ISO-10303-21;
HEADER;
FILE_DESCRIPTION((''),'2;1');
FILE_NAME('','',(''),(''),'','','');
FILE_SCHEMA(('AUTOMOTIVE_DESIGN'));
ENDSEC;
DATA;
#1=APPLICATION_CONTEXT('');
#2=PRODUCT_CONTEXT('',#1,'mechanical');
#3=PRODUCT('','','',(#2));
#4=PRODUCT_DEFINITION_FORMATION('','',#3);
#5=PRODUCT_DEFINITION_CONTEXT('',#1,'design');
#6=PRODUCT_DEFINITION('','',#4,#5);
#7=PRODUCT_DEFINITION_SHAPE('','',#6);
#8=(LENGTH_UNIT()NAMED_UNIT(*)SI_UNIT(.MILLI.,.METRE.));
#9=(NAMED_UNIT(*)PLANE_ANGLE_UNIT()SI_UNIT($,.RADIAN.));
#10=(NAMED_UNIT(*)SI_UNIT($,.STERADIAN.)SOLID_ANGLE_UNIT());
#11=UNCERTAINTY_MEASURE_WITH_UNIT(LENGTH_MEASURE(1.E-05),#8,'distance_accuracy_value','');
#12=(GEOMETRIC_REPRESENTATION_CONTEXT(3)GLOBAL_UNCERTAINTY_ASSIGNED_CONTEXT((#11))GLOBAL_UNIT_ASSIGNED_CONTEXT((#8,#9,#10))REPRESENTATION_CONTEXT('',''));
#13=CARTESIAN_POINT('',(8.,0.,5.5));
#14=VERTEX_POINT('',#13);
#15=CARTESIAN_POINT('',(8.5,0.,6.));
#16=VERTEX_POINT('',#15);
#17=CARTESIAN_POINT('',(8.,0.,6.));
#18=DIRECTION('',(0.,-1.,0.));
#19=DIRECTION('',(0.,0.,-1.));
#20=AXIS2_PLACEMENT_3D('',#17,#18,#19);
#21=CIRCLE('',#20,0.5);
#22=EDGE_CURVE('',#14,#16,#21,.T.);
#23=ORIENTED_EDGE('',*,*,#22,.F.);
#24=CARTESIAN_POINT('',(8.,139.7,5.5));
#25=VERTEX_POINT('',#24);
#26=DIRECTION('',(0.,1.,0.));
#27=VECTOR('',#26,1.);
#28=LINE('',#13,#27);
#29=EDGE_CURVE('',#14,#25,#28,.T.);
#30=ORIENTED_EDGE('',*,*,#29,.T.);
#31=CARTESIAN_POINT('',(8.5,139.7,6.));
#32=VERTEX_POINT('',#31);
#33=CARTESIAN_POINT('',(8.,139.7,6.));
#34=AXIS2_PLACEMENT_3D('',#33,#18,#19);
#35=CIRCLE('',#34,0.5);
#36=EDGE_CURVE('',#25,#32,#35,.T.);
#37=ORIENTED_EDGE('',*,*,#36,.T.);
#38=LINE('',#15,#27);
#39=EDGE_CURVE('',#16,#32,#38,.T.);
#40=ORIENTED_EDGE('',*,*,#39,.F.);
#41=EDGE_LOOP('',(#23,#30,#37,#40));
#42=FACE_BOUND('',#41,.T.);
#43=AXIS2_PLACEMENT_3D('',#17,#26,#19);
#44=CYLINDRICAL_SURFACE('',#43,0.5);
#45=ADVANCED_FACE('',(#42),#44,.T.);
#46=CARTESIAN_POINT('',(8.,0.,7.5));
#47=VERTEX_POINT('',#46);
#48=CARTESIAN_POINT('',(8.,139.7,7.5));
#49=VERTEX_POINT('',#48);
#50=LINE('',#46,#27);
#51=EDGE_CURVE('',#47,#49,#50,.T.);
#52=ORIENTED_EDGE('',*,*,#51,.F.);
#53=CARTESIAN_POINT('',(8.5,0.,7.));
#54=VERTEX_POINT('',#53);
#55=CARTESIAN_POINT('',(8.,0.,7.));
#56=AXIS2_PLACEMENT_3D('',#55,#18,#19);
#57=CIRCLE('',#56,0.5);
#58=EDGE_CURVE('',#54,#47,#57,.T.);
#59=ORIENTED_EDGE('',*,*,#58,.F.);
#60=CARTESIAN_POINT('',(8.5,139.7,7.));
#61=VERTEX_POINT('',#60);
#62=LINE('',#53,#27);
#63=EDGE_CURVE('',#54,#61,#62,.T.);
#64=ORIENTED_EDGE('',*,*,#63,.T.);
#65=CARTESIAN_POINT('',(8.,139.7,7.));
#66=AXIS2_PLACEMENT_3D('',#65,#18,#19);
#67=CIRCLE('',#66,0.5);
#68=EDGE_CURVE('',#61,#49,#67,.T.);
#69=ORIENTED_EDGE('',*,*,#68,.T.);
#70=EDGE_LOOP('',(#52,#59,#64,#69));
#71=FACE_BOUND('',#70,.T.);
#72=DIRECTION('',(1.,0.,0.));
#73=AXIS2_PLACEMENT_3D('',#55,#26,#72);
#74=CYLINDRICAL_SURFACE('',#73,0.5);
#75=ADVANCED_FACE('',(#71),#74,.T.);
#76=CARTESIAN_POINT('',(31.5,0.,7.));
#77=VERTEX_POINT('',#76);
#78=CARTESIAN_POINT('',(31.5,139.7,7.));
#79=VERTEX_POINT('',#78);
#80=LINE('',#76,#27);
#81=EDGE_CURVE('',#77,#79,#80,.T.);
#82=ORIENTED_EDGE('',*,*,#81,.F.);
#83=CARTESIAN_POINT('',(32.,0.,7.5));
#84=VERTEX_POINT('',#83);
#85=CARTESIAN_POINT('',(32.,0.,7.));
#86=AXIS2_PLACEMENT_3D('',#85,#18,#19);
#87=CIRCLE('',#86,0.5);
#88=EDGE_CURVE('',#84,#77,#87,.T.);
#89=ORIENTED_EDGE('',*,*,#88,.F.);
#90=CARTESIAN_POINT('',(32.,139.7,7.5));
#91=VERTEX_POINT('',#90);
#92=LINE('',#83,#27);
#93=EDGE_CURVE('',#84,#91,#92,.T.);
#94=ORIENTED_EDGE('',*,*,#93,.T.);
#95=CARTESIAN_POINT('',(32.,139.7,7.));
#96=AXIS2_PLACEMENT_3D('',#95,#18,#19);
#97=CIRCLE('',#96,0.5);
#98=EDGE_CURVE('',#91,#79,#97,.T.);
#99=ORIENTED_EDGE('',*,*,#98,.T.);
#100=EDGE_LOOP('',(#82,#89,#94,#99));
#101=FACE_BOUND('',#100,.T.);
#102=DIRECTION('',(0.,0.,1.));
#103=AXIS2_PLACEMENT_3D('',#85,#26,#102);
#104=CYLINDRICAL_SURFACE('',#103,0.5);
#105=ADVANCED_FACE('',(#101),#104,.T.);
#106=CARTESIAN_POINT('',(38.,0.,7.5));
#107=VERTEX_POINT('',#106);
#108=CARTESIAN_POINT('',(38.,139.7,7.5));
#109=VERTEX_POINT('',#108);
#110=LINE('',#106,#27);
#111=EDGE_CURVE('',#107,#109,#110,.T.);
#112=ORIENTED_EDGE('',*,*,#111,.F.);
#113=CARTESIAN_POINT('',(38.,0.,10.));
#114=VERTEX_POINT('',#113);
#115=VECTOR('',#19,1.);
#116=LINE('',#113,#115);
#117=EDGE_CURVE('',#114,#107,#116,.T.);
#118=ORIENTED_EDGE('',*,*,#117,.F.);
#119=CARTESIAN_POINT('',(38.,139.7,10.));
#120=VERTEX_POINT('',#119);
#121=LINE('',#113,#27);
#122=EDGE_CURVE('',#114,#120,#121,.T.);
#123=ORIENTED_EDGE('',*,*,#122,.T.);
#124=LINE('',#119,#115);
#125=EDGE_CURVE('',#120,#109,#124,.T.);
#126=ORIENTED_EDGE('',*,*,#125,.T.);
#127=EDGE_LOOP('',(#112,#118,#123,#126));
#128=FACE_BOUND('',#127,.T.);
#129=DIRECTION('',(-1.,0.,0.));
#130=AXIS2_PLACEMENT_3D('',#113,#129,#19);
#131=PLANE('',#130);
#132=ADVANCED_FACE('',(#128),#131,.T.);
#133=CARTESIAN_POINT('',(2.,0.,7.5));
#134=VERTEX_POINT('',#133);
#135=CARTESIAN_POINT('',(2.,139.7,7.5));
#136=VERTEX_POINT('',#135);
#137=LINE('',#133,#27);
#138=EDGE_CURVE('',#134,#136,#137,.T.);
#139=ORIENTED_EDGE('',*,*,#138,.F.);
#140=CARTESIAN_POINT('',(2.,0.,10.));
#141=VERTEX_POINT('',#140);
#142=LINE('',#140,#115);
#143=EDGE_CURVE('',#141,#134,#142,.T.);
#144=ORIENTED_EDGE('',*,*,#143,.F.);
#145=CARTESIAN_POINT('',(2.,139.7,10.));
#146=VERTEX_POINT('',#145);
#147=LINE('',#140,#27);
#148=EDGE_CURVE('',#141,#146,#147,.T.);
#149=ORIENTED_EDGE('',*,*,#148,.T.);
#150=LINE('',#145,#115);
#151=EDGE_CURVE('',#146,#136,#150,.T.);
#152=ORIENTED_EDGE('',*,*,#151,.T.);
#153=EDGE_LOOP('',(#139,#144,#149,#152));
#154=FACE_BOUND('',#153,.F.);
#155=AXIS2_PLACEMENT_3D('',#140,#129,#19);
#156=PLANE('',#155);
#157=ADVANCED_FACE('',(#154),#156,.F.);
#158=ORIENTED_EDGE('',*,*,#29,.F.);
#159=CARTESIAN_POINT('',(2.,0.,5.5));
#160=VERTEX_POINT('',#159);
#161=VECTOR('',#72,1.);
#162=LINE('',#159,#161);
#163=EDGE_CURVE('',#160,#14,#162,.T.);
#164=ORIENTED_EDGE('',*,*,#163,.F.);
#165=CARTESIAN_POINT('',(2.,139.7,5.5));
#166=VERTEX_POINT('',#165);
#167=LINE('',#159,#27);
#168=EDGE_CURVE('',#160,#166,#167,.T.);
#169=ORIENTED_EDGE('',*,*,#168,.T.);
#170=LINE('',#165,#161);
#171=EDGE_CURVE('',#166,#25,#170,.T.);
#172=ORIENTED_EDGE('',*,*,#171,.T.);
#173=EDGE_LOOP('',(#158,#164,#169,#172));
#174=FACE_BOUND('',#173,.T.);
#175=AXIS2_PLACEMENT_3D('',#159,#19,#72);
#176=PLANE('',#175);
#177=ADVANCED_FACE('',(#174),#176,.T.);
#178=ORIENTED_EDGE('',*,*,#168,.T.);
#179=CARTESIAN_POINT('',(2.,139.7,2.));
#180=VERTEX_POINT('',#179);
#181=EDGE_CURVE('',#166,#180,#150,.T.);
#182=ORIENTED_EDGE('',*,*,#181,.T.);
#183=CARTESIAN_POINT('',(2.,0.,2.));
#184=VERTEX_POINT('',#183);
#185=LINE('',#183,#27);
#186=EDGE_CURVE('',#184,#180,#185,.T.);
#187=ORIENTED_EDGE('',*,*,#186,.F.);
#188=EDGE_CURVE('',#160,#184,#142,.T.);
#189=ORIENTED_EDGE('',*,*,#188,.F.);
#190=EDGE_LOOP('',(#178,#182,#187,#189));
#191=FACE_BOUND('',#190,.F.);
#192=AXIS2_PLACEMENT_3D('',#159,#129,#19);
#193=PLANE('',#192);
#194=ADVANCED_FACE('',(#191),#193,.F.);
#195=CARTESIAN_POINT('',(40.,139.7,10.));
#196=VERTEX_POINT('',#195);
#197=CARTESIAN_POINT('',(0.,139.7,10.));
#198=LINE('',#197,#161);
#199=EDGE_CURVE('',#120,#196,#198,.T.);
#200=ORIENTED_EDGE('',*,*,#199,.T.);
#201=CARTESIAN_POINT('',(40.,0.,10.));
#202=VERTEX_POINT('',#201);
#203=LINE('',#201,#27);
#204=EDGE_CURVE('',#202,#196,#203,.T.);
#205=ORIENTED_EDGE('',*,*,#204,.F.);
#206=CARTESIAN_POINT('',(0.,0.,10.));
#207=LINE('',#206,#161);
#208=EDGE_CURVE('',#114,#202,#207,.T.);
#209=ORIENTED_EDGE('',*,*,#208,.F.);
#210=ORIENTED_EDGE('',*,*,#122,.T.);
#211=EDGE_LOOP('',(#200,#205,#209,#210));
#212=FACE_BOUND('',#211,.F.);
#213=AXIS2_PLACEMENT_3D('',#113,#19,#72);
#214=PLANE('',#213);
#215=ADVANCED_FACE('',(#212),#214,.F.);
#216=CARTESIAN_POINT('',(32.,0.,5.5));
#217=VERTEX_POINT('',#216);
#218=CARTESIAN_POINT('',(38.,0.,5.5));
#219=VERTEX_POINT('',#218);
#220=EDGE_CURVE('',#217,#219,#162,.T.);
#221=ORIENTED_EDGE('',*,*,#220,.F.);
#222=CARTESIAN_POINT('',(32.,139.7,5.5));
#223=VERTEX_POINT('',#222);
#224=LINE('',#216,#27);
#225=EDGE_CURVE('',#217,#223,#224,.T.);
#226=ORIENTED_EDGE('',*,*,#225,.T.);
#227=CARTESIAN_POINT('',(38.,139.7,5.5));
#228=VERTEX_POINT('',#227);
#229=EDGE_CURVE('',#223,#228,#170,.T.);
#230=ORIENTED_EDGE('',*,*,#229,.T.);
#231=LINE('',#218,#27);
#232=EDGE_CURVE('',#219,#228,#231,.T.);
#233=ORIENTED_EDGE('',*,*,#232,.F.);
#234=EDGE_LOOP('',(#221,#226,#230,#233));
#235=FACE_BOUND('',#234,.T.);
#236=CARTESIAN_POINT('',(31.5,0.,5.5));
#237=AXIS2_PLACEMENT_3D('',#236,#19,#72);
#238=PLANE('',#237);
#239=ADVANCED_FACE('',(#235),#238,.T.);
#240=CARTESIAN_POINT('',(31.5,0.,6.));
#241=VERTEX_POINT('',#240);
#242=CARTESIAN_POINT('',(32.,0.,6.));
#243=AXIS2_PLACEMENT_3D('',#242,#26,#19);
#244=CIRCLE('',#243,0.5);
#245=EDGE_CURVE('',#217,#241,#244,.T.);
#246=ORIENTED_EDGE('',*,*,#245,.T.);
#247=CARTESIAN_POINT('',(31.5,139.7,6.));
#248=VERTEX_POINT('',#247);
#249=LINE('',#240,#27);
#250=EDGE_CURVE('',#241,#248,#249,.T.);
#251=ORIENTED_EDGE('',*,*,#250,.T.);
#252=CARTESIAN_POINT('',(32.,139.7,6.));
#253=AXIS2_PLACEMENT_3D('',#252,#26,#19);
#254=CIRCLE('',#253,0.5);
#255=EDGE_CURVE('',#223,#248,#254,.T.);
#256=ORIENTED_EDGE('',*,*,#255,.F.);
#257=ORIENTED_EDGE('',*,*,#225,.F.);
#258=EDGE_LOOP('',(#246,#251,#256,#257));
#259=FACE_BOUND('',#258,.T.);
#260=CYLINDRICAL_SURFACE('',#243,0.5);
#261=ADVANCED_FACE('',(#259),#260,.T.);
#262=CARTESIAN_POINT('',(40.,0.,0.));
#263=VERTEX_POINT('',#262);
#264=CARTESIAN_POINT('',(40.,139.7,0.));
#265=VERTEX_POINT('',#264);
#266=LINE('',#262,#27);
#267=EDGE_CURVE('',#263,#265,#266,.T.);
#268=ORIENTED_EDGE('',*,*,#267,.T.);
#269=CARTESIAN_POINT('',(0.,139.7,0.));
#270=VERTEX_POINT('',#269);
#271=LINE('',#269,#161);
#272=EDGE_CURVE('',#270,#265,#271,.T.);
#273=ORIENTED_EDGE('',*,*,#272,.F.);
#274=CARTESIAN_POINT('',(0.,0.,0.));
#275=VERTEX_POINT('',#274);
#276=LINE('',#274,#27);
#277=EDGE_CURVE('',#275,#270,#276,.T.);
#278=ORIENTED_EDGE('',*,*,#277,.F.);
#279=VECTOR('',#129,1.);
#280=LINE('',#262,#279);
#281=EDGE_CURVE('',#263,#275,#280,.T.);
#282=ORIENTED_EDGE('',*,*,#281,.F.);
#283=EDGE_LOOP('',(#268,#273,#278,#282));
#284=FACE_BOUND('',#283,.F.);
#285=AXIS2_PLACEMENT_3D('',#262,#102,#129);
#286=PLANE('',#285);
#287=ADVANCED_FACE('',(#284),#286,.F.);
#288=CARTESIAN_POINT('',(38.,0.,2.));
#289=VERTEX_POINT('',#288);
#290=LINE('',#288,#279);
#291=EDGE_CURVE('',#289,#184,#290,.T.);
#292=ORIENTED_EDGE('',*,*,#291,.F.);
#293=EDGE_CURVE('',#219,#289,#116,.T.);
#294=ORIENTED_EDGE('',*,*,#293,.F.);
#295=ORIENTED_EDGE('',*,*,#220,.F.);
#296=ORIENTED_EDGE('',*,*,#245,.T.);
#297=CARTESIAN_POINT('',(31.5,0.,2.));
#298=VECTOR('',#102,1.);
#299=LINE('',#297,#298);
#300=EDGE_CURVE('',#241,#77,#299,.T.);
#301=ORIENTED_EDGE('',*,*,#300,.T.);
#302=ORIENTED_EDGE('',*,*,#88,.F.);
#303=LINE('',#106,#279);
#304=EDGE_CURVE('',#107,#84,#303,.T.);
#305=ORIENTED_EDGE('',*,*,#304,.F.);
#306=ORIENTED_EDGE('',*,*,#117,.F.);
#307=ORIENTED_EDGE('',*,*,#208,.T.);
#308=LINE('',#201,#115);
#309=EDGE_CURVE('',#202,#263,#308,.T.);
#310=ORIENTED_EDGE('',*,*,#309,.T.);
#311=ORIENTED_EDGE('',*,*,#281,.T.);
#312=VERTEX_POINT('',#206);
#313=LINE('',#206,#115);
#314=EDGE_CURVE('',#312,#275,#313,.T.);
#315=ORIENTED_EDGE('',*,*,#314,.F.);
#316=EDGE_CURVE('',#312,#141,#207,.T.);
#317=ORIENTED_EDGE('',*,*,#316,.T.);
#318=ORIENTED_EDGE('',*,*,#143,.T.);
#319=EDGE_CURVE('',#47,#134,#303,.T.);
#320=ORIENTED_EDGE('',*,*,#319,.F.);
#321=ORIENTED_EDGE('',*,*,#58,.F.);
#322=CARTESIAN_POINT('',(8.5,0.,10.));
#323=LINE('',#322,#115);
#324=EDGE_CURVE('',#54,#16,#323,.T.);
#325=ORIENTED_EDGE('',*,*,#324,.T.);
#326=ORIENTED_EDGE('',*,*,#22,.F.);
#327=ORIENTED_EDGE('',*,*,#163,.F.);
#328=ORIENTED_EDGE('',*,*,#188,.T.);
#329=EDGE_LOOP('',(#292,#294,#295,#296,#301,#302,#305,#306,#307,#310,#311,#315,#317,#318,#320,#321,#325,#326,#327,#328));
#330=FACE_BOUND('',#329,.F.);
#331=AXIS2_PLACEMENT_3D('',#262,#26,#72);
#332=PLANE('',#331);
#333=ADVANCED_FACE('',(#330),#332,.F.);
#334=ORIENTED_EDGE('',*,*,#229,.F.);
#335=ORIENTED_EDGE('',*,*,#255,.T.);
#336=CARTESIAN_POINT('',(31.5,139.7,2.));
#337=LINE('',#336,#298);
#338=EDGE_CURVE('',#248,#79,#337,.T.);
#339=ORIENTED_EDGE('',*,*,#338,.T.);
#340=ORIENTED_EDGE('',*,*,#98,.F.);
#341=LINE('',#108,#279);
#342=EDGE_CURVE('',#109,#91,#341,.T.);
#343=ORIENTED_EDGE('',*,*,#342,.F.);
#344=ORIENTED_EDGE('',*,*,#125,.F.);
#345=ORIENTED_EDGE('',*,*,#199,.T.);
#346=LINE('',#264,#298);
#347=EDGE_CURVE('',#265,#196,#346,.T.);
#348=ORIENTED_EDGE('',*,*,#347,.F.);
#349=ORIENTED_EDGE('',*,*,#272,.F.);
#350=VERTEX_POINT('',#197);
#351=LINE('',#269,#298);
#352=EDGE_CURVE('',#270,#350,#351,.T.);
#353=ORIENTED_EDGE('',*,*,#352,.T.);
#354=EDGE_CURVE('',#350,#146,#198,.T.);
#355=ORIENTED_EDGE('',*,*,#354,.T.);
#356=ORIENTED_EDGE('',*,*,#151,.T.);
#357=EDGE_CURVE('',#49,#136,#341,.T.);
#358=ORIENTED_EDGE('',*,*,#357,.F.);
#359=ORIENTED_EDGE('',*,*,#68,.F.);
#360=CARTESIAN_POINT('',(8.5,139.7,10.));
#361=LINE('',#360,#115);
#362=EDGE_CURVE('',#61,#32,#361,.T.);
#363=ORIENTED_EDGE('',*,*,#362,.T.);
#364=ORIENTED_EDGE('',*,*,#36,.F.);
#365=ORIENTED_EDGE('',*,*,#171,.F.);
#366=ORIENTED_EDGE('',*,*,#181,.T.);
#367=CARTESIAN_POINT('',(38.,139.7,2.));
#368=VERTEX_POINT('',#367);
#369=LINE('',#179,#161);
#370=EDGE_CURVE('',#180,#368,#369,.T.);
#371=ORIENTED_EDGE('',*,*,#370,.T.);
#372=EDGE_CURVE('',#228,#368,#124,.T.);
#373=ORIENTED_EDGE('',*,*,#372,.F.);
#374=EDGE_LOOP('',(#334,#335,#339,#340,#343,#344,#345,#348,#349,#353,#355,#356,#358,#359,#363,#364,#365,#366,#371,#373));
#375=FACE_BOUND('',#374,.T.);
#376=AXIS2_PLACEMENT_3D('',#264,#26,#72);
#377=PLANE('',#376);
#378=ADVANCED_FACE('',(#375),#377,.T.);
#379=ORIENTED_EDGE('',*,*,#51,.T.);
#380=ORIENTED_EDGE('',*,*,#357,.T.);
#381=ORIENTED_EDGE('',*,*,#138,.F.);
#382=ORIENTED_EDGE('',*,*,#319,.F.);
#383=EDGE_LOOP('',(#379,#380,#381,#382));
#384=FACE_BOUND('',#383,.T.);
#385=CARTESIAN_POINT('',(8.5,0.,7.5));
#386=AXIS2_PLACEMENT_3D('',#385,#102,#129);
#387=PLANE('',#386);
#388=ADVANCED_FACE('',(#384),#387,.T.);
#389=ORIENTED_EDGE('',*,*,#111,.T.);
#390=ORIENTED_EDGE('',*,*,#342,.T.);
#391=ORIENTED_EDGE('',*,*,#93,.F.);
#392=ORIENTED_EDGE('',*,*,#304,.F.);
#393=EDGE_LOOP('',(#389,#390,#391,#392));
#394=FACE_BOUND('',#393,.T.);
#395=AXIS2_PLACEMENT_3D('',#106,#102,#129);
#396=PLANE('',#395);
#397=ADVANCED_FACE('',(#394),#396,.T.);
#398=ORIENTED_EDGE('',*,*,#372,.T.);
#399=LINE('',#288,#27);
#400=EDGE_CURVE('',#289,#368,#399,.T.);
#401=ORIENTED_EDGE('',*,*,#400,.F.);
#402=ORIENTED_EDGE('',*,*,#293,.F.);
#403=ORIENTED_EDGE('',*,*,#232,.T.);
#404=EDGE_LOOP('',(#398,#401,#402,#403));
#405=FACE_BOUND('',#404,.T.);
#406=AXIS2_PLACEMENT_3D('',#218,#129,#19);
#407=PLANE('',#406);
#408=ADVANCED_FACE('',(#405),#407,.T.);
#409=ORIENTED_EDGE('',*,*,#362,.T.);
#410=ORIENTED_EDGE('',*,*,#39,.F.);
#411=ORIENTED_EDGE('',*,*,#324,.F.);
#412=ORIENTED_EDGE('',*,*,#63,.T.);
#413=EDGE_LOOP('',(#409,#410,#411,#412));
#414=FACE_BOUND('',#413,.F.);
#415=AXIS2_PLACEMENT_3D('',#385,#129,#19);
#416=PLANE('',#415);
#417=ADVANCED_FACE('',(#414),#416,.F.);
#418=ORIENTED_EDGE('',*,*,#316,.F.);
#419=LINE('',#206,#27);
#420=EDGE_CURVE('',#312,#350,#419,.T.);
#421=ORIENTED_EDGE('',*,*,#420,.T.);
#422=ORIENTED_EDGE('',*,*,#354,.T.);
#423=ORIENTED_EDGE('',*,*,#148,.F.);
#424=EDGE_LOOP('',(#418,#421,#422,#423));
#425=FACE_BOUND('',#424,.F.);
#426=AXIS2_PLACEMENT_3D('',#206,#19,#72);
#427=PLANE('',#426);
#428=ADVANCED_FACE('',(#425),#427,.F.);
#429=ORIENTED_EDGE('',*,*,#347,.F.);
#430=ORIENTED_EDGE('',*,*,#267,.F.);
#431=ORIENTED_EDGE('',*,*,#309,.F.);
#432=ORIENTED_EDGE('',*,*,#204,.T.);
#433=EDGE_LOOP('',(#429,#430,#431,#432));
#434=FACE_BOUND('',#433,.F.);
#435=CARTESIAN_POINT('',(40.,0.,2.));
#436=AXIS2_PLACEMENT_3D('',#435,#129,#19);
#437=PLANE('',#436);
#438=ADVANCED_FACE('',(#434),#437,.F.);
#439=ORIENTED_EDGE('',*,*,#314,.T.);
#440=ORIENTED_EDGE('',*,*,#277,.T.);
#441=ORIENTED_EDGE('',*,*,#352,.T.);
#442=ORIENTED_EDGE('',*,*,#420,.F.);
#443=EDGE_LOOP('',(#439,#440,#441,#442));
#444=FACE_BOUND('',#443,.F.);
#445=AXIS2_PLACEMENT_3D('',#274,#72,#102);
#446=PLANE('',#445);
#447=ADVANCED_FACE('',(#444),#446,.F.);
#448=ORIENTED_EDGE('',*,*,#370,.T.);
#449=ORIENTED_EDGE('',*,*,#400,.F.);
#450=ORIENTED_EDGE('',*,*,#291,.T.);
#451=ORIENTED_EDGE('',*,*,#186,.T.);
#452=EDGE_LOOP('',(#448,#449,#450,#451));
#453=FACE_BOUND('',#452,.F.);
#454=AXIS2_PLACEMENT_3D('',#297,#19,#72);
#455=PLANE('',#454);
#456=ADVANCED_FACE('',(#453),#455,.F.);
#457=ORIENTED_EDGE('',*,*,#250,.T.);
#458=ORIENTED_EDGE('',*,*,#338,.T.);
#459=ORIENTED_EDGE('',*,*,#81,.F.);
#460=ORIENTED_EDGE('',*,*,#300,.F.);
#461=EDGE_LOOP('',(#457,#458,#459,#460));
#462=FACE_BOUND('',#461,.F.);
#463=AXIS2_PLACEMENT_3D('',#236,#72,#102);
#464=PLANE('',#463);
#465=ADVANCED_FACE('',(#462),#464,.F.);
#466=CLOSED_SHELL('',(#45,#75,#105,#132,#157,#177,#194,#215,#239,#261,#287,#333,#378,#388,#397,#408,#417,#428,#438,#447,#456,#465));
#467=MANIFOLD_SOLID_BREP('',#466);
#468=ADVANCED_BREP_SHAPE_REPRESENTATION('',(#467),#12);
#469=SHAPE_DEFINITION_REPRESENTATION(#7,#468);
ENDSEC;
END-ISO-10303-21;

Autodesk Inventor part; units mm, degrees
ref_plane "YZ Plane" through (0, 0, 0) normal (1, 0, 0) x (0, 1, 0)
ref_plane "XZ Plane" through (0, 0, 0) normal (0, 1, 0) x (-1, 0, 0)
ref_plane "XY Plane" through (0, 0, 0) normal (0, 0, 1) x (1, 0, 0)
sketch "Sketch1" plane through (0, 0, 0) normal (0, 1, 0) x (-1, 0, 0)
  line L0 (0, 0) -> (-40, 0)
  line L1 (-40, 0) -> (-40, -10)
  line L2 (-40, -10) -> (0, -10)
  line L3 (0, -10) -> (0, 0)
  line L4 (0, 0) -> (-40, 0)
  line L5 (-40, 0) -> (-40, -2)
  line L6 (-40, -2) -> (0, -2)
  line L7 (0, -2) -> (0, 0)
  line L8 (0, -10) -> (-2, -10)
  line L9 (-2, -10) -> (-2, 0)
  line L10 (-2, 0) -> (0, 0)
  line L11 (0, 0) -> (0, -10)
  line L12 (-40, -10) -> (-38, -10)
  line L13 (-38, -10) -> (-38, 0)
  line L14 (-38, 0) -> (-40, 0)
  line L15 (-40, 0) -> (-40, -10)
  line L16 (-2, -7.5) -> (-38, -7.5)
  line L17 (-38, -7.5) -> (-38, -5.5)
  line L18 (-38, -5.5) -> (-2, -5.5)
  line L19 (-2, -5.5) -> (-2, -7.5)
  line L20 (-8.5, -10) -> (-31.5, -10)
  line L21 (-31.5, -10) -> (-31.5, -2)
  line L22 (-31.5, -2) -> (-8.5, -2)
  line L23 (-8.5, -2) -> (-8.5, -10)
  point P0 (-38, -10)
  point P1 (-38, -7.5)
  point P2 (-31.5, -7.5)
  point P3 (-31.5, -5.5)
  point P4 (-38, -2)
  point P5 (-2, -2)
  point P6 (-2, -5.5)
  point P7 (-8.5, -5.5)
  point P8 (-8.5, -7.5)
  dimension "d0" = 10
  dimension "d1" = 40
  dimension "d2" = 2
  dimension "d3" = 2
  dimension "d4" = 2
  dimension "d5" = 2
  dimension "d6" = 3.5
  dimension "d7" = 2.5
  dimension "d13" = 6.5
  dimension "d14" = 6.5
extrude "Extrusion1" add sketch "Sketch1" along normal blind 139.7 contours L3 L6 L9 L0 | L9 L6 L13 L0 | L3 L2 L9 L6 | L13 L6 L1 L0 | L13 L2 L1 L6 | L9 L16 L23 L18 | L18 L21 L16 L13
fillet "Fillet1" radius 0.5 2 edges at (31.5, 69.85, -7.5) (31.5, 69.85, -5.5)
fillet "Fillet2" radius 0.5 2 edges at (8.5, 69.85, -5.5) (8.5, 69.85, -7.5)
move or copy body "Rotate1" bodies to move or copy 1 copy no rotation origin (0, 0, 0) rotation axis (0, 1, 0) rotation angle 180 translate (40, 0, 0)
properties part number "lift"
